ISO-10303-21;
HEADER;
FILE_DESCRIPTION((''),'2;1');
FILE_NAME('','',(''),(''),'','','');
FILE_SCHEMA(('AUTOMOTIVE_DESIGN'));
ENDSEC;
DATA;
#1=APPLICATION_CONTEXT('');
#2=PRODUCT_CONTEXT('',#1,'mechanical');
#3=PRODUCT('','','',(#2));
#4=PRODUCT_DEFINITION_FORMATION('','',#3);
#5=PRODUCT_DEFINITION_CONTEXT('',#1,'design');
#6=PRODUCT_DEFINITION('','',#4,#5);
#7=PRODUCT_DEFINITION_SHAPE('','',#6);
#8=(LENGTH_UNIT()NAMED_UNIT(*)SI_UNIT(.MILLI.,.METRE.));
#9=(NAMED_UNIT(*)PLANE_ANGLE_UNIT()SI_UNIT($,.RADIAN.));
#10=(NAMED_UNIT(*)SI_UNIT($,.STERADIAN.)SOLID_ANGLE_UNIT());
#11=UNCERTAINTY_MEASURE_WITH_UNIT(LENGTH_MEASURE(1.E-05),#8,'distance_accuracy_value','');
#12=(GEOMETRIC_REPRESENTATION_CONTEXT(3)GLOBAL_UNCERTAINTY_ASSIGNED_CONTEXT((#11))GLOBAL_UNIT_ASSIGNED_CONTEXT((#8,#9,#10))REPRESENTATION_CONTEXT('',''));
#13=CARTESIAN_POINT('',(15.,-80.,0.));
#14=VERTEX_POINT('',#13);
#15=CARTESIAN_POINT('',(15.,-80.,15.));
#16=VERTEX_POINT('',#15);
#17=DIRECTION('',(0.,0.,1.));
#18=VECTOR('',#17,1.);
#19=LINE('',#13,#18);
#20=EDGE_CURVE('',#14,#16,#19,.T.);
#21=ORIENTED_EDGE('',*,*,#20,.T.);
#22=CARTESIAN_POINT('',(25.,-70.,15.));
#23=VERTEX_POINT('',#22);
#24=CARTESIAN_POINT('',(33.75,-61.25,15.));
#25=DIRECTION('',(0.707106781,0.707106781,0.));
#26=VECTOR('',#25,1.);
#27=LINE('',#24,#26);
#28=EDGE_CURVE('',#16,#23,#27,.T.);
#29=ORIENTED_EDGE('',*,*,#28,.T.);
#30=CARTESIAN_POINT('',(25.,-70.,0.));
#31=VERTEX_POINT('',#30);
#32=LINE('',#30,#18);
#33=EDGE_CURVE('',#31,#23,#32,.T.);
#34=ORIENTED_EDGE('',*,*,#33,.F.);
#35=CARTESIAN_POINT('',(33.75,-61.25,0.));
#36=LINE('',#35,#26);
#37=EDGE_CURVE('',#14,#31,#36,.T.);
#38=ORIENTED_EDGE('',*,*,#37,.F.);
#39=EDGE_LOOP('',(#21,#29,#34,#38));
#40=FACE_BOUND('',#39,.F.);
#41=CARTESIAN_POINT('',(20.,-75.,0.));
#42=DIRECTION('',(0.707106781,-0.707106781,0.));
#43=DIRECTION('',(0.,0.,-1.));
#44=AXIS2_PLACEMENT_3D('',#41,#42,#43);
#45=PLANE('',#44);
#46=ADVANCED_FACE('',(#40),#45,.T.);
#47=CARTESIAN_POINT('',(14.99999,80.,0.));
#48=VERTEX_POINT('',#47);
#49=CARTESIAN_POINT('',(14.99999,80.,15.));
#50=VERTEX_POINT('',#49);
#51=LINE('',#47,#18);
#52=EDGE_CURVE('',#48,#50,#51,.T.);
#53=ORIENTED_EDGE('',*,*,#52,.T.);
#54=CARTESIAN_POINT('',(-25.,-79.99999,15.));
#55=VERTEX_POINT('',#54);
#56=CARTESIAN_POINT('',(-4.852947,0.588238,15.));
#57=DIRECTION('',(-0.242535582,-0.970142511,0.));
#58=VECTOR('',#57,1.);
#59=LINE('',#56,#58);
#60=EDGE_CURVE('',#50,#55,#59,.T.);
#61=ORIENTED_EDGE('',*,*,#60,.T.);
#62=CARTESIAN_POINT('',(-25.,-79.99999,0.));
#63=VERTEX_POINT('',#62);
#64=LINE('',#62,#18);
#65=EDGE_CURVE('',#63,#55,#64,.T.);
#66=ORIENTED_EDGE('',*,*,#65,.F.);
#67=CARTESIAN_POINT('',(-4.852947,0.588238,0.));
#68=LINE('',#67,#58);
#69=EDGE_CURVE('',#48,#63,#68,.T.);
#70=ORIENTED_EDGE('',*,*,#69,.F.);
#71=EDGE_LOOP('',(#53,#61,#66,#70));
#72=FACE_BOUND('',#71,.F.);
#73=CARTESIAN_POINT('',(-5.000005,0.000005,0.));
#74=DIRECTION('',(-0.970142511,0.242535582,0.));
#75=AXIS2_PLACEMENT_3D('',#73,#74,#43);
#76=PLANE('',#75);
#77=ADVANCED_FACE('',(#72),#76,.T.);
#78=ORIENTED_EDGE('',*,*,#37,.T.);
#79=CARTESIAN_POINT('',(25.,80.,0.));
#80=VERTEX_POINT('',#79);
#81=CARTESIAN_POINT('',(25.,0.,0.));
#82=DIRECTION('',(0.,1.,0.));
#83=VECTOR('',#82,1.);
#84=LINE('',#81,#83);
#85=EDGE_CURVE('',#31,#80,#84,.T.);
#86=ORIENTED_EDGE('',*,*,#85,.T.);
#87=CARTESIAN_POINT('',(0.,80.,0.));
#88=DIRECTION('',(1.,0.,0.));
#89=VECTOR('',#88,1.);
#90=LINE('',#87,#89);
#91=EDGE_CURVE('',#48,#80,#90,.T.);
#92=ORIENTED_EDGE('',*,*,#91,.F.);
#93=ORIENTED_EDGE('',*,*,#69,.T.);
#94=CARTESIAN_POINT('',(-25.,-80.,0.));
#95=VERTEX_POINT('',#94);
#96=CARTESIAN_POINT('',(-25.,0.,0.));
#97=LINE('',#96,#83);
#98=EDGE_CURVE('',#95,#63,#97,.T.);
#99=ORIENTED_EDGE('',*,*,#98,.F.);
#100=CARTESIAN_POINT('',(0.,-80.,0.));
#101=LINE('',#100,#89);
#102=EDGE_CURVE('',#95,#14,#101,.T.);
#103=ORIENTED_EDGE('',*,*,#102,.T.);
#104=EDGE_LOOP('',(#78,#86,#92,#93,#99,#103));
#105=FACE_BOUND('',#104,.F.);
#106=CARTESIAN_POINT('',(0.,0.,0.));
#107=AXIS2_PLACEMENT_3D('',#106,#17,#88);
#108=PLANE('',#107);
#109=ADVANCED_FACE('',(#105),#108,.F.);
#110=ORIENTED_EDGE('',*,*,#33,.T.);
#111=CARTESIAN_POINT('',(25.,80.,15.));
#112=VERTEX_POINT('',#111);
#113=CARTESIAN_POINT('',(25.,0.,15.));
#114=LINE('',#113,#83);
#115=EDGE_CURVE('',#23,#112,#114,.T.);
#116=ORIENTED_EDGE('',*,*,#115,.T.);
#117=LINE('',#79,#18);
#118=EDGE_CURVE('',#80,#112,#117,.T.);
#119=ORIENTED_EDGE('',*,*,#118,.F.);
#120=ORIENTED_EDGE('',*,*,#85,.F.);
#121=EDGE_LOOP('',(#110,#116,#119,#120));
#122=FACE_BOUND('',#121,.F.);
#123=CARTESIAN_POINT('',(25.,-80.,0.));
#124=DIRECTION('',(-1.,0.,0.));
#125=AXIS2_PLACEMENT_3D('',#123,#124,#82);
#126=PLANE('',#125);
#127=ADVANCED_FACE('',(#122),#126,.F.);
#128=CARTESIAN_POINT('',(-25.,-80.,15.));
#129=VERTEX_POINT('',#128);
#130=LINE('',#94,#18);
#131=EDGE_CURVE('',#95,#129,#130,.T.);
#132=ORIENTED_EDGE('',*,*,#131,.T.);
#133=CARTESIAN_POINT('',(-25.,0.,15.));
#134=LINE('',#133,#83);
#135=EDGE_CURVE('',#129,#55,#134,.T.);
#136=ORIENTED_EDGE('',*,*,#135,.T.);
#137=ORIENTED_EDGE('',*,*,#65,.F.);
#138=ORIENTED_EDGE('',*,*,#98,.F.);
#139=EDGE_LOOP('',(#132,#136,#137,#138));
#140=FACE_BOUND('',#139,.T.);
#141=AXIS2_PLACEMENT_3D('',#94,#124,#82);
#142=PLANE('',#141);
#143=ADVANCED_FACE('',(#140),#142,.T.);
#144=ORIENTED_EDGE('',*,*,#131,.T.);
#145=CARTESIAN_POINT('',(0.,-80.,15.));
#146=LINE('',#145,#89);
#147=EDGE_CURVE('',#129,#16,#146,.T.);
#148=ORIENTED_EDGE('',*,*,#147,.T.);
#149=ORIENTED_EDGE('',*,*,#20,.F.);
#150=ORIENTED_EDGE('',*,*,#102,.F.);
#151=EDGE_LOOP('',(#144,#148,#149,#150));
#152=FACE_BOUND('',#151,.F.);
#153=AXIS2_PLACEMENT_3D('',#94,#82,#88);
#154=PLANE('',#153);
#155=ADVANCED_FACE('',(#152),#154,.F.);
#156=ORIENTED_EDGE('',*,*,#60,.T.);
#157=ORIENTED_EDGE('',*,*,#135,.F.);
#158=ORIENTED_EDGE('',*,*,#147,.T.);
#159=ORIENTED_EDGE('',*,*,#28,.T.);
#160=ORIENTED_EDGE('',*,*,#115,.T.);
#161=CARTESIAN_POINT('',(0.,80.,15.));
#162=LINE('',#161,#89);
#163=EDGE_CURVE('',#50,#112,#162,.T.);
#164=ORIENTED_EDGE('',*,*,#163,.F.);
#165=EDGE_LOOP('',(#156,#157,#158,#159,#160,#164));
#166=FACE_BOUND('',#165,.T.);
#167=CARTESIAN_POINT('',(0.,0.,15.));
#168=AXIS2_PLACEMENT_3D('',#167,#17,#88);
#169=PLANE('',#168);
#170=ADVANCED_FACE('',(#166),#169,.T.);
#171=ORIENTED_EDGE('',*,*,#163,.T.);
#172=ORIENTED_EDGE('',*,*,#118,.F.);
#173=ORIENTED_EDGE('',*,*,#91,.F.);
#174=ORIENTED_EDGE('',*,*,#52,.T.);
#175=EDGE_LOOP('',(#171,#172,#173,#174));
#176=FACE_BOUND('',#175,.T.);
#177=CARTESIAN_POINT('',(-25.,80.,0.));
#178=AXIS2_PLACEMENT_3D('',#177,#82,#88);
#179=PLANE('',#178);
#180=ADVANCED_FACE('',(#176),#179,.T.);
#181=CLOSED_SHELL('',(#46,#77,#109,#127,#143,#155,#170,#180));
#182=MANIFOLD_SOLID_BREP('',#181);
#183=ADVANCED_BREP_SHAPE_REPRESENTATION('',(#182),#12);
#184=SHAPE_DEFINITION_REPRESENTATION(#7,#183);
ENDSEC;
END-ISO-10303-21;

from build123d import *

# Parameters (mm, degrees)
F0_W     = 50
F0_H     = 160
F1_DEPTH = 15
F2_SIZE2 = 159.99999
F2_SIZE  = 39.99999
F3_SIZE2 = 10
F3_SIZE  = 10


# Not quite as in the source:
# - a fillet or chamfer is up to 0.001 mm smaller than in the source, because OpenCascade refuses the exact size


with BuildPart() as f1:
    # F0 (on Top) → F1 (new body)
    with BuildSketch(Plane.XY):
        Rectangle(F0_W, F0_H)
    extrude(amount=F1_DEPTH)

    # F2 (size 40 and 160 in the source; OpenCascade refuses exactly that, so slightly less here)
    f2_edges = [f1.edges().sort_by_distance(p)[0] for p in [
        (-25, 80, 7.5),
    ]]
    f2_side = f1.faces().sort_by_distance((0, 80, 7.5))[0]
    chamfer(f2_edges, length=F2_SIZE, length2=F2_SIZE2, reference=f2_side)

    # F3
    f3_edges = [f1.edges().sort_by_distance(p)[0] for p in [
        (25, -80, 7.5),
    ]]
    chamfer(f3_edges, length=F3_SIZE, length2=F3_SIZE2)


solid = f1.part
